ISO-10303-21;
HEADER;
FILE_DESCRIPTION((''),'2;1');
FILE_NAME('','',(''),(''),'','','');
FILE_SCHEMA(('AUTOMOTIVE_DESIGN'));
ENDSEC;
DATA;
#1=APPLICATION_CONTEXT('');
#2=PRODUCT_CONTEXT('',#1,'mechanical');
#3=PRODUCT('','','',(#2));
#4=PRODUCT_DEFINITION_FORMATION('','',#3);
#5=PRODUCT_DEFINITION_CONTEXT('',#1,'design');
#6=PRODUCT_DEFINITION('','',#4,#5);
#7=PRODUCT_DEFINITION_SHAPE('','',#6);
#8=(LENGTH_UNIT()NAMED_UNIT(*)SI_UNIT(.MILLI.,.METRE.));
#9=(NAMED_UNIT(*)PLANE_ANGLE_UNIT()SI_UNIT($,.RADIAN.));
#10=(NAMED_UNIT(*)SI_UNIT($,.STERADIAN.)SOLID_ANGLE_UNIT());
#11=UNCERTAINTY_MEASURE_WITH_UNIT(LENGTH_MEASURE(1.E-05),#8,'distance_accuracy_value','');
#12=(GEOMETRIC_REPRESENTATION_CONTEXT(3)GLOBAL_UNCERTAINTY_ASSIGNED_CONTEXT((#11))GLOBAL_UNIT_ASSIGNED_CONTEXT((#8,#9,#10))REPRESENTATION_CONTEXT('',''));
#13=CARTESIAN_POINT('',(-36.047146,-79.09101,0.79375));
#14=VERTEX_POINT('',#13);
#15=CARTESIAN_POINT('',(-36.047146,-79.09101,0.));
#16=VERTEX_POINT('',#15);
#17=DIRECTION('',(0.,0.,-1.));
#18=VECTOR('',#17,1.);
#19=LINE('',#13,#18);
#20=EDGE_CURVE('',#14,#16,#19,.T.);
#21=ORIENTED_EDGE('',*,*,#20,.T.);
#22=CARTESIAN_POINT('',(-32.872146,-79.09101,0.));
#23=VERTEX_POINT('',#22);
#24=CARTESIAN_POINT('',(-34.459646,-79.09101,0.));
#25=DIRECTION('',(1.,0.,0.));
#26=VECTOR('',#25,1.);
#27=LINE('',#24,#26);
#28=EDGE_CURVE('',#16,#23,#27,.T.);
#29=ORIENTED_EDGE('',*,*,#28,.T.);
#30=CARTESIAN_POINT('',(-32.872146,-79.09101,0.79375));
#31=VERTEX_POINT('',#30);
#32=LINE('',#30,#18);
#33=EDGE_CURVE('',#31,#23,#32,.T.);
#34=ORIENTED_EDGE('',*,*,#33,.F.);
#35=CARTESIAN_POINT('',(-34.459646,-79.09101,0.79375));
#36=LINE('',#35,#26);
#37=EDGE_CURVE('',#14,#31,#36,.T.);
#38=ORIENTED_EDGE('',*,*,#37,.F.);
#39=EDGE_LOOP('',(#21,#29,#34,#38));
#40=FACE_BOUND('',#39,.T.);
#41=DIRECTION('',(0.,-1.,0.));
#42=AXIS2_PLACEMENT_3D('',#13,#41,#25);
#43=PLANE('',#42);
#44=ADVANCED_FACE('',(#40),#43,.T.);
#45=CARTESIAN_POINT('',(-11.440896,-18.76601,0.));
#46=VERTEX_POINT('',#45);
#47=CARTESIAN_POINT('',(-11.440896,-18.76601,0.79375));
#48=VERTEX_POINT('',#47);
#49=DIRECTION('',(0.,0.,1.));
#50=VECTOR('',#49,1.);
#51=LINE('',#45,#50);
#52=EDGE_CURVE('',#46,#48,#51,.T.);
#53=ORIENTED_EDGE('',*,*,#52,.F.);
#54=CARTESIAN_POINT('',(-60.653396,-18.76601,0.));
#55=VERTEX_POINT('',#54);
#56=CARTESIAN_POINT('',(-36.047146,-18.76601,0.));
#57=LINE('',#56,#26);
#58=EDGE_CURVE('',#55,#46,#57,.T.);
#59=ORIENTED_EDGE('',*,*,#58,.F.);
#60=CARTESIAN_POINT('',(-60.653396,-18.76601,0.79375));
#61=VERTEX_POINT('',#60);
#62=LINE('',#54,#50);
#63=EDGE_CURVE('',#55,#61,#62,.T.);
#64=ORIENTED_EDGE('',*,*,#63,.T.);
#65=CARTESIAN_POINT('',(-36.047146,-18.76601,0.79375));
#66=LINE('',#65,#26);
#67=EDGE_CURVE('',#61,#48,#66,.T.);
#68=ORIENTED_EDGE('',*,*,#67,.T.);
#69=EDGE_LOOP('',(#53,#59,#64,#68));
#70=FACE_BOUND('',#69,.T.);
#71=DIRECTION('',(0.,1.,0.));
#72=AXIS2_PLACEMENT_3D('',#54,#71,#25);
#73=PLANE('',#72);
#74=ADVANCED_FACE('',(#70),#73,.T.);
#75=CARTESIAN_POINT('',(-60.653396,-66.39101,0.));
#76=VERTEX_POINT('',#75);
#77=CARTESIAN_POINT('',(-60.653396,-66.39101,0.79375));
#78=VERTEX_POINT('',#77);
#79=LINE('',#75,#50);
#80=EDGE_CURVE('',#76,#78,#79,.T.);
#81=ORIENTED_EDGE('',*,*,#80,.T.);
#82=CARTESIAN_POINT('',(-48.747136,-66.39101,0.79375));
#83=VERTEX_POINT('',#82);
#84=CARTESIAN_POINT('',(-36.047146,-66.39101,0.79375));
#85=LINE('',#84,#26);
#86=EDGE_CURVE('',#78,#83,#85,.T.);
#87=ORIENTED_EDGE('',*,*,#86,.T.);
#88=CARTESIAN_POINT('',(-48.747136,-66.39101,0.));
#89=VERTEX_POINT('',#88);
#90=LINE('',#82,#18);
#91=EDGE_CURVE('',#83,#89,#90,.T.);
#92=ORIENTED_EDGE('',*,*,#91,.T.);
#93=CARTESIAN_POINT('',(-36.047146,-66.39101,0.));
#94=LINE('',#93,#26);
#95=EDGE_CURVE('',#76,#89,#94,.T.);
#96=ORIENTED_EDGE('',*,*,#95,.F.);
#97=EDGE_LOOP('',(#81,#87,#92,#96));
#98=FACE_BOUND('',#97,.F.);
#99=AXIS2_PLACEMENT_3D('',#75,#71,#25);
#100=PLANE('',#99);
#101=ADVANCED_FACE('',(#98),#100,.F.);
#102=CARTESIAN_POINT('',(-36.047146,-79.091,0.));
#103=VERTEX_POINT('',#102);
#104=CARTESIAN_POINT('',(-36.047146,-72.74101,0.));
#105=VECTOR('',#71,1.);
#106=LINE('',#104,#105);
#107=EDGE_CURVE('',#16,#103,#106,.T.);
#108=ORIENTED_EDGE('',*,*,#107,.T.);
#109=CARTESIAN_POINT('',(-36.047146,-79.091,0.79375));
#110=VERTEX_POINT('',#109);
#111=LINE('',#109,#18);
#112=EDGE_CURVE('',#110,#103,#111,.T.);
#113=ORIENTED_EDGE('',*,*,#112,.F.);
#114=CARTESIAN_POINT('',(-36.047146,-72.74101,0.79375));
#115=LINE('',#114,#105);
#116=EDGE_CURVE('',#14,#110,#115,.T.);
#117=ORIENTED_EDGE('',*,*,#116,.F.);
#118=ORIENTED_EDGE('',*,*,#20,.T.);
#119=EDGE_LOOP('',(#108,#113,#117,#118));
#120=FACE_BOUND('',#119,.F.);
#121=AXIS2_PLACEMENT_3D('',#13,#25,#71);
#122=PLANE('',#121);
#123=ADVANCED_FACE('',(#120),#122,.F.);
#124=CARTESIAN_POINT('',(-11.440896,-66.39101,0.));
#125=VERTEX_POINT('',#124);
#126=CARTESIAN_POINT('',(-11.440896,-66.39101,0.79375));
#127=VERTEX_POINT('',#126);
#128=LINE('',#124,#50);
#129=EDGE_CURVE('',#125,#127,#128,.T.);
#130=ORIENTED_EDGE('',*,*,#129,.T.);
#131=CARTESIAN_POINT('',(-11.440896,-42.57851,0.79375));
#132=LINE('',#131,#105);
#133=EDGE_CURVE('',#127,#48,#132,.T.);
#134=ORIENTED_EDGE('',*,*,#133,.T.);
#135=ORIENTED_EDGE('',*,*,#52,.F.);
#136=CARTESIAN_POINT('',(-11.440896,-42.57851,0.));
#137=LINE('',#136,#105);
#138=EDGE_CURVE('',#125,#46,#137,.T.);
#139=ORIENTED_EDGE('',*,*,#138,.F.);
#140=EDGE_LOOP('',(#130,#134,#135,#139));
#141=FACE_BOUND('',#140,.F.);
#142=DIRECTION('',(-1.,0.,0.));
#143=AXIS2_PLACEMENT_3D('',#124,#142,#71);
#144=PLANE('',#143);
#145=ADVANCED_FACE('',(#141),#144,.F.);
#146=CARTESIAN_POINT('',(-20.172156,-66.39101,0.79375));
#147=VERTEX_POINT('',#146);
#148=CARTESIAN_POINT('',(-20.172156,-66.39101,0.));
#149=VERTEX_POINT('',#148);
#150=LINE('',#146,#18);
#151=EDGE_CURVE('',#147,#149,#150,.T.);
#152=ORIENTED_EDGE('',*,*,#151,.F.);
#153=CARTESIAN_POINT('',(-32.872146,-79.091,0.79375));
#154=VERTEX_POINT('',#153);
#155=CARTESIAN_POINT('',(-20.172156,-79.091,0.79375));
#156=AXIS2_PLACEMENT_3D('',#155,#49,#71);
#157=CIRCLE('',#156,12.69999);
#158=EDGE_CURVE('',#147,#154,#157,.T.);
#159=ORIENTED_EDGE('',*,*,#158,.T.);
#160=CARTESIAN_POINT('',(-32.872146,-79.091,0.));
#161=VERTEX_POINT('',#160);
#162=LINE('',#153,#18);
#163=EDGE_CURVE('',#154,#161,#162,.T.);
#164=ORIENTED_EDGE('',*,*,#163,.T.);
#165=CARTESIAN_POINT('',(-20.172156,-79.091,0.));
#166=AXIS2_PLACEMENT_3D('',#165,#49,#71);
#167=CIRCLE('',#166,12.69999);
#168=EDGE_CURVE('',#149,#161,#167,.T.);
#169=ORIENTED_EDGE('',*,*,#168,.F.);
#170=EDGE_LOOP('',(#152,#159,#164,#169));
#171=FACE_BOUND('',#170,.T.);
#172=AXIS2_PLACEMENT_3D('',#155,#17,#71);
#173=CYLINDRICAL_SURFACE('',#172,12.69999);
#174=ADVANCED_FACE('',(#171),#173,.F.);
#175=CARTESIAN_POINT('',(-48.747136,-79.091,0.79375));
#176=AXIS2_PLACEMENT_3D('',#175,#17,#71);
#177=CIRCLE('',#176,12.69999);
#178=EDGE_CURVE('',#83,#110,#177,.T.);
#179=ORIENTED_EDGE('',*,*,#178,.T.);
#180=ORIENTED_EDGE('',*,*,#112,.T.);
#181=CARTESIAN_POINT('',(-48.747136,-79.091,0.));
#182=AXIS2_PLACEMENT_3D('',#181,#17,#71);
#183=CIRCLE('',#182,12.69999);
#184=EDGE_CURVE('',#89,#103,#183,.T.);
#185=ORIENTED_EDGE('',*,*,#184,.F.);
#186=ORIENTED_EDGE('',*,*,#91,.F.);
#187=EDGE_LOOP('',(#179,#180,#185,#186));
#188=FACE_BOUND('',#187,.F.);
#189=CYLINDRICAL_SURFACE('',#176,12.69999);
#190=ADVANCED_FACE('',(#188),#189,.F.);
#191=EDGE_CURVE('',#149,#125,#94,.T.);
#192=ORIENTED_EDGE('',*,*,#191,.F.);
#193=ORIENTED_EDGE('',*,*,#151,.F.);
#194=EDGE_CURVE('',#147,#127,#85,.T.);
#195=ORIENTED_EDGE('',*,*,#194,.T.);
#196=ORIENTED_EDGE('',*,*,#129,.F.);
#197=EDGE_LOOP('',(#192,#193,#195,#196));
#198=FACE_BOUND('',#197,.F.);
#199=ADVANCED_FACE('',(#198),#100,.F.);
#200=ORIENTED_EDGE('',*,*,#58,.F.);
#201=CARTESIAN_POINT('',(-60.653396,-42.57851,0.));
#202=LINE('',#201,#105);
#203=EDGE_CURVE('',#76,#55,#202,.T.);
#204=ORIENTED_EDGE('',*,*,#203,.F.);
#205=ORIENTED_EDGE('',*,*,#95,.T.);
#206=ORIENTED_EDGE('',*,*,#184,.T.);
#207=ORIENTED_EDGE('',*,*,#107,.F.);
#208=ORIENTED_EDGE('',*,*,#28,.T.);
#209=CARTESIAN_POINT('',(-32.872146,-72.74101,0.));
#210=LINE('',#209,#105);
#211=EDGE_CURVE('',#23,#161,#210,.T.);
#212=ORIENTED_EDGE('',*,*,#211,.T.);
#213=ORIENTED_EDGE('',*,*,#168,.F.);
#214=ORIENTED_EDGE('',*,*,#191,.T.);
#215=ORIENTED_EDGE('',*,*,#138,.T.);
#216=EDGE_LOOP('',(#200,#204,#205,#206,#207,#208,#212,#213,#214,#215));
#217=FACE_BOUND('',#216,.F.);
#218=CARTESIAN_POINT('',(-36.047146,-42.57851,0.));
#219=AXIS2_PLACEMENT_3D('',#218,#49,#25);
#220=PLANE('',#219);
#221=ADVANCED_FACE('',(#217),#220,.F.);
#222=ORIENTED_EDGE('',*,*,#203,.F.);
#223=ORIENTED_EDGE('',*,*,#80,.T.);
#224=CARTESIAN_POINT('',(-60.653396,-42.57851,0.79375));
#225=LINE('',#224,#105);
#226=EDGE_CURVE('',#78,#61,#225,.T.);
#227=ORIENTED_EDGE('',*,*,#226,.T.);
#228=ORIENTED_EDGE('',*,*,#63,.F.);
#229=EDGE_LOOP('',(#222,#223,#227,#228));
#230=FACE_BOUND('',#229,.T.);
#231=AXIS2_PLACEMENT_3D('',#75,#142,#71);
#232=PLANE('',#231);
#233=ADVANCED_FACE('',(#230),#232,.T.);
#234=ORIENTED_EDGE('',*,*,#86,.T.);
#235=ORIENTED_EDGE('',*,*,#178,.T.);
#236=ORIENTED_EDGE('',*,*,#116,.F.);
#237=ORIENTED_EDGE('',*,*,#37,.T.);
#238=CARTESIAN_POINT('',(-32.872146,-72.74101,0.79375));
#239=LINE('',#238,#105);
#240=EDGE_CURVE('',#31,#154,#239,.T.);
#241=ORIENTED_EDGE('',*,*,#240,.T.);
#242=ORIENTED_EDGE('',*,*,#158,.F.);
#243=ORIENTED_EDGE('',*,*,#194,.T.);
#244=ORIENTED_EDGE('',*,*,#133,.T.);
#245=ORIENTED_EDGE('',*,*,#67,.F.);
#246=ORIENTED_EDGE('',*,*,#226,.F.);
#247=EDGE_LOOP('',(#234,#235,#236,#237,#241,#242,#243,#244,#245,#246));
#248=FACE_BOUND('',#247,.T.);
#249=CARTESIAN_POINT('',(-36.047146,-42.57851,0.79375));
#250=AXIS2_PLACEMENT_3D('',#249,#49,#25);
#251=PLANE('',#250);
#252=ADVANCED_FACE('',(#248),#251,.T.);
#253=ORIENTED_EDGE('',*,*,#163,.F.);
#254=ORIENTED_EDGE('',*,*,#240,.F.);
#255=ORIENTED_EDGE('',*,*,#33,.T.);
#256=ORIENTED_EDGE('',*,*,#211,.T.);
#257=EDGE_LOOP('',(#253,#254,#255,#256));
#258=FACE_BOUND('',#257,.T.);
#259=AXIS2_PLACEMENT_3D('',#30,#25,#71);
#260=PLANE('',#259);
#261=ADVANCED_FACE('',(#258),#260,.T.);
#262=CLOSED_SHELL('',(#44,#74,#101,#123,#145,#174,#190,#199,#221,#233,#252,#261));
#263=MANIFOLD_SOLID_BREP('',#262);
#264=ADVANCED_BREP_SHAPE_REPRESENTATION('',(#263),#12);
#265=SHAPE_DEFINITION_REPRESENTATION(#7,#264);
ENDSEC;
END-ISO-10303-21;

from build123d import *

# Parameters (mm, degrees)
F0_W     = 49.2125
F0_H     = 47.625
F1_DEPTH = 0.79375
F2_W     = 3.175
F2_H     = 12.7
F3_DEPTH = 0.79375
F4_R     = 12.69999


# Not quite as in the source:
# - a fillet or chamfer is up to 0.001 mm smaller than in the source, because OpenCascade refuses the exact size


with BuildPart() as f1:
    # F0 (on Top) → F1 (new body)
    with BuildSketch(Plane.XY):
        with Locations((-36.0471457243, -42.5785098099)):
            Rectangle(F0_W, F0_H)
    extrude(amount=F1_DEPTH)

    # F2 (on face) → F3 (join)
    with BuildSketch(Plane.XY.offset(0.79375)):
        with Locations((-34.4596457243, -72.7410098099)):
            Rectangle(F2_W, F2_H)
    extrude(amount=-F3_DEPTH)

    # F4 (radius 12.7 in the source; OpenCascade refuses exactly that, so slightly less here)
    f4_edges = [f1.edges().sort_by_distance(p)[0] for p in [
        (-36.047146, -66.39101, 0.396875),
        (-32.872146, -66.39101, 0.396875),
    ]]
    fillet(f4_edges, radius=F4_R)


solid = f1.part
